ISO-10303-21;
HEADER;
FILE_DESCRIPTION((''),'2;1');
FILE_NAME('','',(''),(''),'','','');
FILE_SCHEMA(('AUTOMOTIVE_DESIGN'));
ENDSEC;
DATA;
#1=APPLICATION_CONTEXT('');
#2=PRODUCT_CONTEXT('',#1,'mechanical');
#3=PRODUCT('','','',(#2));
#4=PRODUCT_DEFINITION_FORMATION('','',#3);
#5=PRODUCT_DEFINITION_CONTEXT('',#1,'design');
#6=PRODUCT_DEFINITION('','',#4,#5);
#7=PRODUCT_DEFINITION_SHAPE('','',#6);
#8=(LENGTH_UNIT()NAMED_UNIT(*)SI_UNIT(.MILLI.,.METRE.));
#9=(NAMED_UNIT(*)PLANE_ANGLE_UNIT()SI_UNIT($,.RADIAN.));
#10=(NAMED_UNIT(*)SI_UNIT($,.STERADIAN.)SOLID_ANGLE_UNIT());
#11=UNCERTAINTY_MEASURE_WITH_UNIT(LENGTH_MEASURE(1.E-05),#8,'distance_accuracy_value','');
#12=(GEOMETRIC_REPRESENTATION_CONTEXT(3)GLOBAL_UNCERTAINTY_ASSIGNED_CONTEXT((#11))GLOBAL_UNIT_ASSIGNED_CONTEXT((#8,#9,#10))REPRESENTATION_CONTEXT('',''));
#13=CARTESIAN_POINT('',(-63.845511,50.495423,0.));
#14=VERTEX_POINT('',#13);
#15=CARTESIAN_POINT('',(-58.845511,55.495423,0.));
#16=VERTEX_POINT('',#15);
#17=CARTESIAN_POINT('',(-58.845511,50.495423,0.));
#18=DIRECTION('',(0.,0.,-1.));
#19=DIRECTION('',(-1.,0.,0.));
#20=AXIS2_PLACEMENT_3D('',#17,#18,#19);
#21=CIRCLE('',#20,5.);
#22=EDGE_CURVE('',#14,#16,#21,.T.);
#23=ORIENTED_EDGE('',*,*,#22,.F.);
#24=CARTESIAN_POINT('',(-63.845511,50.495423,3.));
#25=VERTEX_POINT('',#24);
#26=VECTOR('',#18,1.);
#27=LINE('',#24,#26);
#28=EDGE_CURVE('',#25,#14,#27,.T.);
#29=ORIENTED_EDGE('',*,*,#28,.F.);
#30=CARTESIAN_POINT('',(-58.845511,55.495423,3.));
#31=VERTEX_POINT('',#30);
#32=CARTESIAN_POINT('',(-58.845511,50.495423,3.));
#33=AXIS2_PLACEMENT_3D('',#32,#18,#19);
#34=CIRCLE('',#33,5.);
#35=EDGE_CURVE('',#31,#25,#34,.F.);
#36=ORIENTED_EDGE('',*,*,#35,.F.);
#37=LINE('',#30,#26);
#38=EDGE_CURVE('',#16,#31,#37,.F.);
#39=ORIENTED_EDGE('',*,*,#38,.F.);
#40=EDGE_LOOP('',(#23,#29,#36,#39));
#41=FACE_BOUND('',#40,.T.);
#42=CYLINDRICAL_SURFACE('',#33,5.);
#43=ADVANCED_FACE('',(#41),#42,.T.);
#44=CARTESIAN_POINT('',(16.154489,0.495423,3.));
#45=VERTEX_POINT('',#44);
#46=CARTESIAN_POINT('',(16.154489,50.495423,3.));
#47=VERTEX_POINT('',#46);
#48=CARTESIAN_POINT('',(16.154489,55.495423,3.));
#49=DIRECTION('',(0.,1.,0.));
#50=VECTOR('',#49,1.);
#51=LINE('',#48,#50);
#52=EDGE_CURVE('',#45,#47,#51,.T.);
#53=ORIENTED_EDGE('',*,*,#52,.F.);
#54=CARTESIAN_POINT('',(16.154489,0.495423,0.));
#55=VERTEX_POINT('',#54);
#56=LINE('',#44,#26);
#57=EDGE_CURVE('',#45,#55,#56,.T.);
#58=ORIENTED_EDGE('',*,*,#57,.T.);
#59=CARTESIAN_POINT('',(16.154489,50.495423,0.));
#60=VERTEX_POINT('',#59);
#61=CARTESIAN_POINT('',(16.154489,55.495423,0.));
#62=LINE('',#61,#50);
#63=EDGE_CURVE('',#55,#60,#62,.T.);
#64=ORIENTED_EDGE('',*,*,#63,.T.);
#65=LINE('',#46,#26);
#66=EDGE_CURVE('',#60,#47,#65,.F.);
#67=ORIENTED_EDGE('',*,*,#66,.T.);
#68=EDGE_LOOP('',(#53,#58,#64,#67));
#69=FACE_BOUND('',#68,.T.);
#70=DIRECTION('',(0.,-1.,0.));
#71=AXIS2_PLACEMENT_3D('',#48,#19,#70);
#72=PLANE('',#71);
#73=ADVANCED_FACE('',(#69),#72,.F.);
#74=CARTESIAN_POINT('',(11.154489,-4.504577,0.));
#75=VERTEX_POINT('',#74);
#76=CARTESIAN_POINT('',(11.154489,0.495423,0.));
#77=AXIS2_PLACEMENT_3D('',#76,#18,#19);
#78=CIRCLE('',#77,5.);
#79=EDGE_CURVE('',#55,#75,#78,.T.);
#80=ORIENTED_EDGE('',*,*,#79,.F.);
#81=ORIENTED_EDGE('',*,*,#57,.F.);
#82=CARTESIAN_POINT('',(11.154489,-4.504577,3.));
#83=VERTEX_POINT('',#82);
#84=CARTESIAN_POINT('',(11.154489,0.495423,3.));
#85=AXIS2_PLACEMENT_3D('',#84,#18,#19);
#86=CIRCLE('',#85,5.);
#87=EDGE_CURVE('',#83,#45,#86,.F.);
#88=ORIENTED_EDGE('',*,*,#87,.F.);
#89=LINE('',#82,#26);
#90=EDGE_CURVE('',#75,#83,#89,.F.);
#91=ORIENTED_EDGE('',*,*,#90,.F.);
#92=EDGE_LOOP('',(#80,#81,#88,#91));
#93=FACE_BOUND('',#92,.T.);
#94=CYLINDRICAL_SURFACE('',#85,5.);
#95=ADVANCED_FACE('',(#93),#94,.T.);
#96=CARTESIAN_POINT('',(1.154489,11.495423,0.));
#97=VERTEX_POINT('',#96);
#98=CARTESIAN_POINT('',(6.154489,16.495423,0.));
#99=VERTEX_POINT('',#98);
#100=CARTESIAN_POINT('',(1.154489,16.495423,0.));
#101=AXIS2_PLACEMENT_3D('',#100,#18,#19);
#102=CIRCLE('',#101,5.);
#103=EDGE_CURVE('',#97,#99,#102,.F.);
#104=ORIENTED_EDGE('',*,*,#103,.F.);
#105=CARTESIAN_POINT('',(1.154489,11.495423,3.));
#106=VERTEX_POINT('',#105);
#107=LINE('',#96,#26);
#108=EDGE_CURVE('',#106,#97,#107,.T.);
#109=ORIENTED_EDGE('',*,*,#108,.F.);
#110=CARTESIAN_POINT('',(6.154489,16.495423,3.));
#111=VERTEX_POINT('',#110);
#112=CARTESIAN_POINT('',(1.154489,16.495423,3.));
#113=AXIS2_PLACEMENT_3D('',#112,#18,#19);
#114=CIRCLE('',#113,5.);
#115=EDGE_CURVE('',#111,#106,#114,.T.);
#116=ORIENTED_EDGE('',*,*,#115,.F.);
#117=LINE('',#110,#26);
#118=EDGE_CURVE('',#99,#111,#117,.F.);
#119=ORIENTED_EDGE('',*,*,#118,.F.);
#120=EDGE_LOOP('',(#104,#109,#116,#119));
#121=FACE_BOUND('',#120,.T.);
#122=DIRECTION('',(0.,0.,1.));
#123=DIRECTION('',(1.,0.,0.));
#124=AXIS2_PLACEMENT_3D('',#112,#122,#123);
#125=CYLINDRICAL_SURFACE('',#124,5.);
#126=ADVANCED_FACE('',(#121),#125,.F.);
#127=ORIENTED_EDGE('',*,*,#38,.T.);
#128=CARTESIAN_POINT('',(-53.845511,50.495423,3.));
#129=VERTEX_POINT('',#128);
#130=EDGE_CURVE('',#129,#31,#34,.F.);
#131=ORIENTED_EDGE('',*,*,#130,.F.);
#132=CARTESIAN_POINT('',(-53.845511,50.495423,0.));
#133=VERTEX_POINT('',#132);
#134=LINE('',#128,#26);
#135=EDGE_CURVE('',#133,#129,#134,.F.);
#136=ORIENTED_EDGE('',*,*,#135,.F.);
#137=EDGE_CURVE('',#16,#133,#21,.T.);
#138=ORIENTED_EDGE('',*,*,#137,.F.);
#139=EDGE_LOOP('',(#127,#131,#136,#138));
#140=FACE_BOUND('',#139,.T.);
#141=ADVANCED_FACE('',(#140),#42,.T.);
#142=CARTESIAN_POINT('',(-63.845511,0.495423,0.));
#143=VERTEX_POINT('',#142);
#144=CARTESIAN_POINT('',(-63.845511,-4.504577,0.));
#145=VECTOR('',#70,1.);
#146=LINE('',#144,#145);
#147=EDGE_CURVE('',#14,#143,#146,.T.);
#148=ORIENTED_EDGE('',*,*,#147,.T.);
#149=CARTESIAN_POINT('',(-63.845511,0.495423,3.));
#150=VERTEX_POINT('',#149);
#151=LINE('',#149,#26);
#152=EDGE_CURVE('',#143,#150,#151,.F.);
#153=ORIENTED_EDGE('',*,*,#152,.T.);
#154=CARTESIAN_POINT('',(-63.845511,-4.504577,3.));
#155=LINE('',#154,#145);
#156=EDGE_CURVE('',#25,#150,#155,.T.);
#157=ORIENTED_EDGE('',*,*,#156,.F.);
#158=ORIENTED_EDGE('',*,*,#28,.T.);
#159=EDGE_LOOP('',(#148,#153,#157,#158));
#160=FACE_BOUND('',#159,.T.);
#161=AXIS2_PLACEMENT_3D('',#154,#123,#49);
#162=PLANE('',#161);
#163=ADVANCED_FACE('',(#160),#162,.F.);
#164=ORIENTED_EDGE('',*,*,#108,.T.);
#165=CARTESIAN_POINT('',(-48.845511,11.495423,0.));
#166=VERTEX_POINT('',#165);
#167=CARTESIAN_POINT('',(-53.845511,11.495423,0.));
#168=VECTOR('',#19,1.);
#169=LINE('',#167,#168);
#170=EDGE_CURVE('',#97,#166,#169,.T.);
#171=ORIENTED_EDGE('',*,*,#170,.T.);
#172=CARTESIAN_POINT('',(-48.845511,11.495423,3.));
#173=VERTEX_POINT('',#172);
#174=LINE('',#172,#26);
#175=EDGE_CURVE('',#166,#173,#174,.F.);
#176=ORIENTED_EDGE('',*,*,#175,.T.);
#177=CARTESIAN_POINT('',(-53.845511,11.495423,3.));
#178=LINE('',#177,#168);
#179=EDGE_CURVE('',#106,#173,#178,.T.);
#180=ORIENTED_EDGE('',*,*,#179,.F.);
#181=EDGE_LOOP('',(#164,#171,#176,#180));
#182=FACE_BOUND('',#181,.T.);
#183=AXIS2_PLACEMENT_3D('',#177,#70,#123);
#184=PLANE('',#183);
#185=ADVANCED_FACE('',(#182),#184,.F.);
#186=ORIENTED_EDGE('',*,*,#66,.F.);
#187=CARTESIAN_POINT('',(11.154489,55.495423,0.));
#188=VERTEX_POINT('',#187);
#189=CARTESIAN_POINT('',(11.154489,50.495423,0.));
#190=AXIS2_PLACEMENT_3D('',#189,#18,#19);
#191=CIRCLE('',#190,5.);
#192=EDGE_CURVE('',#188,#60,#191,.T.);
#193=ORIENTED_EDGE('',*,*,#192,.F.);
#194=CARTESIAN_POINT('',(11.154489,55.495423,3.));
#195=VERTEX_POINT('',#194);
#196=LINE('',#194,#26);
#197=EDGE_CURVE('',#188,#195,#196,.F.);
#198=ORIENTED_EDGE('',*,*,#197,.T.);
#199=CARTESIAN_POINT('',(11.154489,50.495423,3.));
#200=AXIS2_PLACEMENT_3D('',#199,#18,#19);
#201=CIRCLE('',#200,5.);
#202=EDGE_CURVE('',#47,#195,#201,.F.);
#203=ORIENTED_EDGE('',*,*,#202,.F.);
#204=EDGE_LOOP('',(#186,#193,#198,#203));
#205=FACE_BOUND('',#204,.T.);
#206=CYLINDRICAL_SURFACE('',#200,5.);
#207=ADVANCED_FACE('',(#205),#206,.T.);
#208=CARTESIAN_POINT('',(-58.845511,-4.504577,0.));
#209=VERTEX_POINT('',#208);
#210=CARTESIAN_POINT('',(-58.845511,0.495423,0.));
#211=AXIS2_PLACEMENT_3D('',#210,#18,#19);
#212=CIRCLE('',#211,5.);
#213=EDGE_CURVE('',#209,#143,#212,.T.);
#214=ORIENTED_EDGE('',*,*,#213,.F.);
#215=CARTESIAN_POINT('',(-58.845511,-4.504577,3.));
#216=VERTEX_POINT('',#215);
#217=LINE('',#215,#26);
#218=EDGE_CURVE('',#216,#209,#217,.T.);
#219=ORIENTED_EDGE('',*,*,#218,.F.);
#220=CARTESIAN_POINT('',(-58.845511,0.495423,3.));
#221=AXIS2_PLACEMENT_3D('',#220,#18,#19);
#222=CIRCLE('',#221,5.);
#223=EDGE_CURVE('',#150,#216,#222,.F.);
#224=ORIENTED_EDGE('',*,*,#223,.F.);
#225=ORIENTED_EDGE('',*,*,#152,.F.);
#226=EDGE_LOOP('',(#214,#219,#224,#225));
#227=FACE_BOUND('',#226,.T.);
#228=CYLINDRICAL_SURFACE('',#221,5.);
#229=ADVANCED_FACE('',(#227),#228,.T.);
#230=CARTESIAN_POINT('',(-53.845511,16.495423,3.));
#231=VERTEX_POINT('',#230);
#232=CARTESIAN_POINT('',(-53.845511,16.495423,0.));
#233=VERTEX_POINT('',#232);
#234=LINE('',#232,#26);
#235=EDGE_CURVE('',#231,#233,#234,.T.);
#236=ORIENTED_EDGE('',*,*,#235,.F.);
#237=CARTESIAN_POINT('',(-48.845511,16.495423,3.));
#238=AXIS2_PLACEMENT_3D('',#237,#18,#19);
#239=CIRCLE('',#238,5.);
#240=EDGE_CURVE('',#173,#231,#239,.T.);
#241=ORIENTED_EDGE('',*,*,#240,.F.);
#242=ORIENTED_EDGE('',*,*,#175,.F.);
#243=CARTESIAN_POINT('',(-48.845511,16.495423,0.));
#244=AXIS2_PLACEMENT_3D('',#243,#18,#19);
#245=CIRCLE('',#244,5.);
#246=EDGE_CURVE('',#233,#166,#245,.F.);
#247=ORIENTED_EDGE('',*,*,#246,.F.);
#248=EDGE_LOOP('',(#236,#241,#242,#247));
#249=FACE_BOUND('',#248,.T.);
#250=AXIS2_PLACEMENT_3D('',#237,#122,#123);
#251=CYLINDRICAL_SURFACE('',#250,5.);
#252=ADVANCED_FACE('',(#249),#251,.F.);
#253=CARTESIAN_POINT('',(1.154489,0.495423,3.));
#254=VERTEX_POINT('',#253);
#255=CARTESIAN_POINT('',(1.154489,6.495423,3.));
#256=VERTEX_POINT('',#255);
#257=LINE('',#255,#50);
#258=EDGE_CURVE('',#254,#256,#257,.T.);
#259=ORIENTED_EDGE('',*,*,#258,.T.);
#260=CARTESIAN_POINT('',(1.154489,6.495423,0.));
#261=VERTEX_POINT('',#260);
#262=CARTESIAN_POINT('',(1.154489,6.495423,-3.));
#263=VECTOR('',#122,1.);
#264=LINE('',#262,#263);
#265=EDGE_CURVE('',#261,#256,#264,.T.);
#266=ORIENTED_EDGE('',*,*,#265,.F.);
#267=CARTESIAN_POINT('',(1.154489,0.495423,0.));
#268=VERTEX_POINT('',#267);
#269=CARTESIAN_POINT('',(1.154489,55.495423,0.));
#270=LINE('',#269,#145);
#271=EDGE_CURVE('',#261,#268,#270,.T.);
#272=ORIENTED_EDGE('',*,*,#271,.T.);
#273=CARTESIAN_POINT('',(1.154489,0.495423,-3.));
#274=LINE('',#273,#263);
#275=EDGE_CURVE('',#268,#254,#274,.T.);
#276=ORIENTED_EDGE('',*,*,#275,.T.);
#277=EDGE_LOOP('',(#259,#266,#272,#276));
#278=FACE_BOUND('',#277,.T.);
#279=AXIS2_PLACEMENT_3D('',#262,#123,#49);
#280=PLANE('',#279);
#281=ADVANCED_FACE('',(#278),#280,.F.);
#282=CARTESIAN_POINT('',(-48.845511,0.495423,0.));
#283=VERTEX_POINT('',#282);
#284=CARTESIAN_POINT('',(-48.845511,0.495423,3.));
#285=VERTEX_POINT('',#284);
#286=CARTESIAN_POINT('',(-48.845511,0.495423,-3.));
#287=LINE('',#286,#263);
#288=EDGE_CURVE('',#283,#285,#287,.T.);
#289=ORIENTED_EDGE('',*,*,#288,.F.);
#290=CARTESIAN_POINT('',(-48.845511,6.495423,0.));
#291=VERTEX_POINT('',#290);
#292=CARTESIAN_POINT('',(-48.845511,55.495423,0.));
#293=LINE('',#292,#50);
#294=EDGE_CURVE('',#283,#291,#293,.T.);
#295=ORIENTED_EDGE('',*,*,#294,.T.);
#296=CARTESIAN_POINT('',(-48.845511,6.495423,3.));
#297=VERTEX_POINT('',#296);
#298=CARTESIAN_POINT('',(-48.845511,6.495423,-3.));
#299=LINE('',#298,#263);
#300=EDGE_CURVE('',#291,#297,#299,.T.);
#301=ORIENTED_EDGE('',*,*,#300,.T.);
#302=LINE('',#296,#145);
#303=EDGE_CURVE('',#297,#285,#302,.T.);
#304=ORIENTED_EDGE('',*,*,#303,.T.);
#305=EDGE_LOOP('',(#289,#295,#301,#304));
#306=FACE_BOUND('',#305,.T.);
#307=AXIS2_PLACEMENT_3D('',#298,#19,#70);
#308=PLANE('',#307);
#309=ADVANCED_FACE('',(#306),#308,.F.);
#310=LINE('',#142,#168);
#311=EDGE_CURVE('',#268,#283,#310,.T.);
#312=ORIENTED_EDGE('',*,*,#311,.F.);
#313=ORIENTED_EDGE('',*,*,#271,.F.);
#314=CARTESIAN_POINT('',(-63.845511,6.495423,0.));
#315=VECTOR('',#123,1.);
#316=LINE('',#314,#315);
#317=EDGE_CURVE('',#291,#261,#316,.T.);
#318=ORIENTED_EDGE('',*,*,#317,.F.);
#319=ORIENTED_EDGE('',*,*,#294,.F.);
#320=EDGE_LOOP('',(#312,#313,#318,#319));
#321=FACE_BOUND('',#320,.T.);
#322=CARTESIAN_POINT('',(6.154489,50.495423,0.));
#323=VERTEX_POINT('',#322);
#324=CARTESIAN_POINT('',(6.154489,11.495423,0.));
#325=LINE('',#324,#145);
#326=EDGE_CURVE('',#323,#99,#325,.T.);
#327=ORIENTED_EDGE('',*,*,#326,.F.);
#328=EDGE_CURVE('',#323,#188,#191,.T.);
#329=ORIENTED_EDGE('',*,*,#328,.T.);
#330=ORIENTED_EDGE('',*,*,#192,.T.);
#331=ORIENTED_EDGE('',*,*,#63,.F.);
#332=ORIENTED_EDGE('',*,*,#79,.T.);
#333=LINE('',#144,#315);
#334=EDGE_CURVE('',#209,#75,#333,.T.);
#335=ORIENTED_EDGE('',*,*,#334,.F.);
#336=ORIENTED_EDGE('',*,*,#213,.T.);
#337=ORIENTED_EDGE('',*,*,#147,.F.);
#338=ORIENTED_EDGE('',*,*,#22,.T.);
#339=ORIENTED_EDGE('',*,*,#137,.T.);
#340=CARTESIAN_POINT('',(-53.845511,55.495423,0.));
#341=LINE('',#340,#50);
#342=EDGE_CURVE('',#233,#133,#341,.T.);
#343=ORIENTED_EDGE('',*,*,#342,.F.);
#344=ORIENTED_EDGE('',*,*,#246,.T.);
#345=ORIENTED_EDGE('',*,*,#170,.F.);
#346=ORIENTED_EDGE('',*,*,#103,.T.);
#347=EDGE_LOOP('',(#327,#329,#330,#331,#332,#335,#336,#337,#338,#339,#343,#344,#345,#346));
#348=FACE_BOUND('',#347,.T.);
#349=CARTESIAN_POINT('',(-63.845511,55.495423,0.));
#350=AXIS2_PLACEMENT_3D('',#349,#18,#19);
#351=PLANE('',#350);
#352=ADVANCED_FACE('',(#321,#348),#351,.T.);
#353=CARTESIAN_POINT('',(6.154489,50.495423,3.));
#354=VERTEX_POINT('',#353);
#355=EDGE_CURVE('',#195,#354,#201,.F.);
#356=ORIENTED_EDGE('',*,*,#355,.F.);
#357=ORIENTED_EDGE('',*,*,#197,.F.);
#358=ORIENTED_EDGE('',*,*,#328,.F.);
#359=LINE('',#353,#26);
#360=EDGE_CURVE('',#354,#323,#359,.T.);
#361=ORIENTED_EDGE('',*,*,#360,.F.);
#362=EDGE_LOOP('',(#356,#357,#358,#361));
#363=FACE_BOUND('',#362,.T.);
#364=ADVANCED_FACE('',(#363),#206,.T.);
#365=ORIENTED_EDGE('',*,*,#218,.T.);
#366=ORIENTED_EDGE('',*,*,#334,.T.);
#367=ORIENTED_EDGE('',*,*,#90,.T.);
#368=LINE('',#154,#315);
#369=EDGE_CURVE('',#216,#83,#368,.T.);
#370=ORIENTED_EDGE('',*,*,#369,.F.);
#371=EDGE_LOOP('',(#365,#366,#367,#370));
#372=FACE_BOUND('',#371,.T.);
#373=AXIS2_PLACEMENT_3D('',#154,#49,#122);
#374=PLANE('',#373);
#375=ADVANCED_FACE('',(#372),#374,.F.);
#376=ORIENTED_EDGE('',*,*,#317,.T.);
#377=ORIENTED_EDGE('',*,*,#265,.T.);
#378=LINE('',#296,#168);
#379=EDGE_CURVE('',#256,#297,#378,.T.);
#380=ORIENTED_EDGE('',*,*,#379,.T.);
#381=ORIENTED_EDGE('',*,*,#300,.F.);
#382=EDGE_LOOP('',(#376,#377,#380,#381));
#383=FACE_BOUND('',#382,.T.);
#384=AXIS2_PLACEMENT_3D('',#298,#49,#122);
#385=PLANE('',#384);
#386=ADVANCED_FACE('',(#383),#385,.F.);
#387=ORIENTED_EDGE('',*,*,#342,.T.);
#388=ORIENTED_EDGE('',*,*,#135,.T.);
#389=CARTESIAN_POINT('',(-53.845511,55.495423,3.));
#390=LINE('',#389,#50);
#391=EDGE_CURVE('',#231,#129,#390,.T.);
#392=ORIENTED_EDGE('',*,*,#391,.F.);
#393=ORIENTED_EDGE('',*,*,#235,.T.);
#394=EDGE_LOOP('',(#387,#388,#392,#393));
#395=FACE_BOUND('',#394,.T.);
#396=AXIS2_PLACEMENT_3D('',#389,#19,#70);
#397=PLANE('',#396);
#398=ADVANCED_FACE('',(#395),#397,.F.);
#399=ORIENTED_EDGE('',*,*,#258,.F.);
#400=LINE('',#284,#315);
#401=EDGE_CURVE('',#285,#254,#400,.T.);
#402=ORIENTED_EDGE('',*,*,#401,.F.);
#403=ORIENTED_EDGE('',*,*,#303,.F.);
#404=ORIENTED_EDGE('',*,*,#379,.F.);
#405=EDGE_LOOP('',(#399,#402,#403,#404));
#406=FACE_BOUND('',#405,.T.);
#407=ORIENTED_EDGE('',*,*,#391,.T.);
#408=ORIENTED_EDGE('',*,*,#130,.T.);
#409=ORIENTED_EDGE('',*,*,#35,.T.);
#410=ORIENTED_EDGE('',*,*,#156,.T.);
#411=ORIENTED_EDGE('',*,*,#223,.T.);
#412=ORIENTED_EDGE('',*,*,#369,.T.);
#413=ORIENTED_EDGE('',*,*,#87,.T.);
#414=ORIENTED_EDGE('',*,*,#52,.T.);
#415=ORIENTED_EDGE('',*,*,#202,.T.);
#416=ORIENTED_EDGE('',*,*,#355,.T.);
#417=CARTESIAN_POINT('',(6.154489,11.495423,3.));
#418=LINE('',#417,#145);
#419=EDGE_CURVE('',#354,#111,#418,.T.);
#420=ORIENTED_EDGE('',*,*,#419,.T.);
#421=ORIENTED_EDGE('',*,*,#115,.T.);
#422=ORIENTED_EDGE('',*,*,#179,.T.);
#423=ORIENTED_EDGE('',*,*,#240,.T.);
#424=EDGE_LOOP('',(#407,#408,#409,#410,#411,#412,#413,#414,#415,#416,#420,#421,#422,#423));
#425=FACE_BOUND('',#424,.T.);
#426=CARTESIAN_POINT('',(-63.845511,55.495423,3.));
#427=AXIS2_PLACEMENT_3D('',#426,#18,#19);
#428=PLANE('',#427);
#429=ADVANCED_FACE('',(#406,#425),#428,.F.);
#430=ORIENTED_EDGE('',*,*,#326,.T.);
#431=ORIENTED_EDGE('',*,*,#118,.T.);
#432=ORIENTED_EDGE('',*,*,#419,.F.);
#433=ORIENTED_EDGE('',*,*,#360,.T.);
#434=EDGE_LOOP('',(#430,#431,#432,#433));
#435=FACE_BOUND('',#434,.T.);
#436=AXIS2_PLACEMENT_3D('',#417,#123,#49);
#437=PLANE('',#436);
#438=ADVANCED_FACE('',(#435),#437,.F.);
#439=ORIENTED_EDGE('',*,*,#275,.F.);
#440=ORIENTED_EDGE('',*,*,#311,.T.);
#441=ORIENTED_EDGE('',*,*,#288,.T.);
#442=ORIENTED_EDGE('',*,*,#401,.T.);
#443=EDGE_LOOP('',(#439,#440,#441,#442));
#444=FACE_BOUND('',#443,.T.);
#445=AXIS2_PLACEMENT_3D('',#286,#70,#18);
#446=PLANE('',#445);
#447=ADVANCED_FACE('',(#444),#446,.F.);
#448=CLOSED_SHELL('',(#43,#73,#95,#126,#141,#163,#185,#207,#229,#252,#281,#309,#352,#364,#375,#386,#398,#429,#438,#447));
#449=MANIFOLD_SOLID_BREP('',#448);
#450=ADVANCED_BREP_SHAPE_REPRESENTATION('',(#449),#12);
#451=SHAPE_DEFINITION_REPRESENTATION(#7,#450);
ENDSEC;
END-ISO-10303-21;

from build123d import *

# Parameters (mm, degrees)
EXTRUSION1_DEPTH        = 3
ESQUISSE2_W             = 50
ESQUISSE2_H             = 6
ENL_V_MAT_EXTRU_1_DEPTH = 6
CONG_1_R                = 5


with BuildPart() as part:
    # Esquisse1 → Extrusion1 (new body)
    with BuildSketch(Plane.XY):
        Polygon((-63.845510563, 55.495422535), (-53.845510563, 55.495422535), (-53.845510563, 11.495422535), (6.154489437, 11.495422535), (6.154489437, 55.495422535), (16.154489437, 55.495422535), (16.154489437, -4.504577465), (-63.845510563, -4.504577465), align=None)
    extrude(amount=EXTRUSION1_DEPTH)

    # Esquisse2 → Enlèv. mat.-Extru.1 (cut)
    with BuildSketch(Plane.XY.offset(3)):
        with Locations((-23.845510563, 3.495422535)):
            Rectangle(ESQUISSE2_W, ESQUISSE2_H)
    extrude(amount=-ENL_V_MAT_EXTRU_1_DEPTH, mode=Mode.SUBTRACT)

    # Congé1
    cong_1_edges = [part.edges().sort_by_distance(p)[0] for p in [
        (-53.845510563, 11.495422535, 1.5),
        (6.154489437, 11.495422535, 1.5),
        (16.154489437, 55.495422535, 1.5),
        (6.154489437, 55.495422535, 1.5),
        (-53.845510563, 55.495422535, 1.5),
        (-63.845510563, 55.495422535, 1.5),
        (16.154489437, -4.504577465, 1.5),
        (-63.845510563, -4.504577465, 1.5),
    ]]
    fillet(cong_1_edges, radius=CONG_1_R - 0.0001)  # a hair under: the kernel refuses the full size


solid = part.part
